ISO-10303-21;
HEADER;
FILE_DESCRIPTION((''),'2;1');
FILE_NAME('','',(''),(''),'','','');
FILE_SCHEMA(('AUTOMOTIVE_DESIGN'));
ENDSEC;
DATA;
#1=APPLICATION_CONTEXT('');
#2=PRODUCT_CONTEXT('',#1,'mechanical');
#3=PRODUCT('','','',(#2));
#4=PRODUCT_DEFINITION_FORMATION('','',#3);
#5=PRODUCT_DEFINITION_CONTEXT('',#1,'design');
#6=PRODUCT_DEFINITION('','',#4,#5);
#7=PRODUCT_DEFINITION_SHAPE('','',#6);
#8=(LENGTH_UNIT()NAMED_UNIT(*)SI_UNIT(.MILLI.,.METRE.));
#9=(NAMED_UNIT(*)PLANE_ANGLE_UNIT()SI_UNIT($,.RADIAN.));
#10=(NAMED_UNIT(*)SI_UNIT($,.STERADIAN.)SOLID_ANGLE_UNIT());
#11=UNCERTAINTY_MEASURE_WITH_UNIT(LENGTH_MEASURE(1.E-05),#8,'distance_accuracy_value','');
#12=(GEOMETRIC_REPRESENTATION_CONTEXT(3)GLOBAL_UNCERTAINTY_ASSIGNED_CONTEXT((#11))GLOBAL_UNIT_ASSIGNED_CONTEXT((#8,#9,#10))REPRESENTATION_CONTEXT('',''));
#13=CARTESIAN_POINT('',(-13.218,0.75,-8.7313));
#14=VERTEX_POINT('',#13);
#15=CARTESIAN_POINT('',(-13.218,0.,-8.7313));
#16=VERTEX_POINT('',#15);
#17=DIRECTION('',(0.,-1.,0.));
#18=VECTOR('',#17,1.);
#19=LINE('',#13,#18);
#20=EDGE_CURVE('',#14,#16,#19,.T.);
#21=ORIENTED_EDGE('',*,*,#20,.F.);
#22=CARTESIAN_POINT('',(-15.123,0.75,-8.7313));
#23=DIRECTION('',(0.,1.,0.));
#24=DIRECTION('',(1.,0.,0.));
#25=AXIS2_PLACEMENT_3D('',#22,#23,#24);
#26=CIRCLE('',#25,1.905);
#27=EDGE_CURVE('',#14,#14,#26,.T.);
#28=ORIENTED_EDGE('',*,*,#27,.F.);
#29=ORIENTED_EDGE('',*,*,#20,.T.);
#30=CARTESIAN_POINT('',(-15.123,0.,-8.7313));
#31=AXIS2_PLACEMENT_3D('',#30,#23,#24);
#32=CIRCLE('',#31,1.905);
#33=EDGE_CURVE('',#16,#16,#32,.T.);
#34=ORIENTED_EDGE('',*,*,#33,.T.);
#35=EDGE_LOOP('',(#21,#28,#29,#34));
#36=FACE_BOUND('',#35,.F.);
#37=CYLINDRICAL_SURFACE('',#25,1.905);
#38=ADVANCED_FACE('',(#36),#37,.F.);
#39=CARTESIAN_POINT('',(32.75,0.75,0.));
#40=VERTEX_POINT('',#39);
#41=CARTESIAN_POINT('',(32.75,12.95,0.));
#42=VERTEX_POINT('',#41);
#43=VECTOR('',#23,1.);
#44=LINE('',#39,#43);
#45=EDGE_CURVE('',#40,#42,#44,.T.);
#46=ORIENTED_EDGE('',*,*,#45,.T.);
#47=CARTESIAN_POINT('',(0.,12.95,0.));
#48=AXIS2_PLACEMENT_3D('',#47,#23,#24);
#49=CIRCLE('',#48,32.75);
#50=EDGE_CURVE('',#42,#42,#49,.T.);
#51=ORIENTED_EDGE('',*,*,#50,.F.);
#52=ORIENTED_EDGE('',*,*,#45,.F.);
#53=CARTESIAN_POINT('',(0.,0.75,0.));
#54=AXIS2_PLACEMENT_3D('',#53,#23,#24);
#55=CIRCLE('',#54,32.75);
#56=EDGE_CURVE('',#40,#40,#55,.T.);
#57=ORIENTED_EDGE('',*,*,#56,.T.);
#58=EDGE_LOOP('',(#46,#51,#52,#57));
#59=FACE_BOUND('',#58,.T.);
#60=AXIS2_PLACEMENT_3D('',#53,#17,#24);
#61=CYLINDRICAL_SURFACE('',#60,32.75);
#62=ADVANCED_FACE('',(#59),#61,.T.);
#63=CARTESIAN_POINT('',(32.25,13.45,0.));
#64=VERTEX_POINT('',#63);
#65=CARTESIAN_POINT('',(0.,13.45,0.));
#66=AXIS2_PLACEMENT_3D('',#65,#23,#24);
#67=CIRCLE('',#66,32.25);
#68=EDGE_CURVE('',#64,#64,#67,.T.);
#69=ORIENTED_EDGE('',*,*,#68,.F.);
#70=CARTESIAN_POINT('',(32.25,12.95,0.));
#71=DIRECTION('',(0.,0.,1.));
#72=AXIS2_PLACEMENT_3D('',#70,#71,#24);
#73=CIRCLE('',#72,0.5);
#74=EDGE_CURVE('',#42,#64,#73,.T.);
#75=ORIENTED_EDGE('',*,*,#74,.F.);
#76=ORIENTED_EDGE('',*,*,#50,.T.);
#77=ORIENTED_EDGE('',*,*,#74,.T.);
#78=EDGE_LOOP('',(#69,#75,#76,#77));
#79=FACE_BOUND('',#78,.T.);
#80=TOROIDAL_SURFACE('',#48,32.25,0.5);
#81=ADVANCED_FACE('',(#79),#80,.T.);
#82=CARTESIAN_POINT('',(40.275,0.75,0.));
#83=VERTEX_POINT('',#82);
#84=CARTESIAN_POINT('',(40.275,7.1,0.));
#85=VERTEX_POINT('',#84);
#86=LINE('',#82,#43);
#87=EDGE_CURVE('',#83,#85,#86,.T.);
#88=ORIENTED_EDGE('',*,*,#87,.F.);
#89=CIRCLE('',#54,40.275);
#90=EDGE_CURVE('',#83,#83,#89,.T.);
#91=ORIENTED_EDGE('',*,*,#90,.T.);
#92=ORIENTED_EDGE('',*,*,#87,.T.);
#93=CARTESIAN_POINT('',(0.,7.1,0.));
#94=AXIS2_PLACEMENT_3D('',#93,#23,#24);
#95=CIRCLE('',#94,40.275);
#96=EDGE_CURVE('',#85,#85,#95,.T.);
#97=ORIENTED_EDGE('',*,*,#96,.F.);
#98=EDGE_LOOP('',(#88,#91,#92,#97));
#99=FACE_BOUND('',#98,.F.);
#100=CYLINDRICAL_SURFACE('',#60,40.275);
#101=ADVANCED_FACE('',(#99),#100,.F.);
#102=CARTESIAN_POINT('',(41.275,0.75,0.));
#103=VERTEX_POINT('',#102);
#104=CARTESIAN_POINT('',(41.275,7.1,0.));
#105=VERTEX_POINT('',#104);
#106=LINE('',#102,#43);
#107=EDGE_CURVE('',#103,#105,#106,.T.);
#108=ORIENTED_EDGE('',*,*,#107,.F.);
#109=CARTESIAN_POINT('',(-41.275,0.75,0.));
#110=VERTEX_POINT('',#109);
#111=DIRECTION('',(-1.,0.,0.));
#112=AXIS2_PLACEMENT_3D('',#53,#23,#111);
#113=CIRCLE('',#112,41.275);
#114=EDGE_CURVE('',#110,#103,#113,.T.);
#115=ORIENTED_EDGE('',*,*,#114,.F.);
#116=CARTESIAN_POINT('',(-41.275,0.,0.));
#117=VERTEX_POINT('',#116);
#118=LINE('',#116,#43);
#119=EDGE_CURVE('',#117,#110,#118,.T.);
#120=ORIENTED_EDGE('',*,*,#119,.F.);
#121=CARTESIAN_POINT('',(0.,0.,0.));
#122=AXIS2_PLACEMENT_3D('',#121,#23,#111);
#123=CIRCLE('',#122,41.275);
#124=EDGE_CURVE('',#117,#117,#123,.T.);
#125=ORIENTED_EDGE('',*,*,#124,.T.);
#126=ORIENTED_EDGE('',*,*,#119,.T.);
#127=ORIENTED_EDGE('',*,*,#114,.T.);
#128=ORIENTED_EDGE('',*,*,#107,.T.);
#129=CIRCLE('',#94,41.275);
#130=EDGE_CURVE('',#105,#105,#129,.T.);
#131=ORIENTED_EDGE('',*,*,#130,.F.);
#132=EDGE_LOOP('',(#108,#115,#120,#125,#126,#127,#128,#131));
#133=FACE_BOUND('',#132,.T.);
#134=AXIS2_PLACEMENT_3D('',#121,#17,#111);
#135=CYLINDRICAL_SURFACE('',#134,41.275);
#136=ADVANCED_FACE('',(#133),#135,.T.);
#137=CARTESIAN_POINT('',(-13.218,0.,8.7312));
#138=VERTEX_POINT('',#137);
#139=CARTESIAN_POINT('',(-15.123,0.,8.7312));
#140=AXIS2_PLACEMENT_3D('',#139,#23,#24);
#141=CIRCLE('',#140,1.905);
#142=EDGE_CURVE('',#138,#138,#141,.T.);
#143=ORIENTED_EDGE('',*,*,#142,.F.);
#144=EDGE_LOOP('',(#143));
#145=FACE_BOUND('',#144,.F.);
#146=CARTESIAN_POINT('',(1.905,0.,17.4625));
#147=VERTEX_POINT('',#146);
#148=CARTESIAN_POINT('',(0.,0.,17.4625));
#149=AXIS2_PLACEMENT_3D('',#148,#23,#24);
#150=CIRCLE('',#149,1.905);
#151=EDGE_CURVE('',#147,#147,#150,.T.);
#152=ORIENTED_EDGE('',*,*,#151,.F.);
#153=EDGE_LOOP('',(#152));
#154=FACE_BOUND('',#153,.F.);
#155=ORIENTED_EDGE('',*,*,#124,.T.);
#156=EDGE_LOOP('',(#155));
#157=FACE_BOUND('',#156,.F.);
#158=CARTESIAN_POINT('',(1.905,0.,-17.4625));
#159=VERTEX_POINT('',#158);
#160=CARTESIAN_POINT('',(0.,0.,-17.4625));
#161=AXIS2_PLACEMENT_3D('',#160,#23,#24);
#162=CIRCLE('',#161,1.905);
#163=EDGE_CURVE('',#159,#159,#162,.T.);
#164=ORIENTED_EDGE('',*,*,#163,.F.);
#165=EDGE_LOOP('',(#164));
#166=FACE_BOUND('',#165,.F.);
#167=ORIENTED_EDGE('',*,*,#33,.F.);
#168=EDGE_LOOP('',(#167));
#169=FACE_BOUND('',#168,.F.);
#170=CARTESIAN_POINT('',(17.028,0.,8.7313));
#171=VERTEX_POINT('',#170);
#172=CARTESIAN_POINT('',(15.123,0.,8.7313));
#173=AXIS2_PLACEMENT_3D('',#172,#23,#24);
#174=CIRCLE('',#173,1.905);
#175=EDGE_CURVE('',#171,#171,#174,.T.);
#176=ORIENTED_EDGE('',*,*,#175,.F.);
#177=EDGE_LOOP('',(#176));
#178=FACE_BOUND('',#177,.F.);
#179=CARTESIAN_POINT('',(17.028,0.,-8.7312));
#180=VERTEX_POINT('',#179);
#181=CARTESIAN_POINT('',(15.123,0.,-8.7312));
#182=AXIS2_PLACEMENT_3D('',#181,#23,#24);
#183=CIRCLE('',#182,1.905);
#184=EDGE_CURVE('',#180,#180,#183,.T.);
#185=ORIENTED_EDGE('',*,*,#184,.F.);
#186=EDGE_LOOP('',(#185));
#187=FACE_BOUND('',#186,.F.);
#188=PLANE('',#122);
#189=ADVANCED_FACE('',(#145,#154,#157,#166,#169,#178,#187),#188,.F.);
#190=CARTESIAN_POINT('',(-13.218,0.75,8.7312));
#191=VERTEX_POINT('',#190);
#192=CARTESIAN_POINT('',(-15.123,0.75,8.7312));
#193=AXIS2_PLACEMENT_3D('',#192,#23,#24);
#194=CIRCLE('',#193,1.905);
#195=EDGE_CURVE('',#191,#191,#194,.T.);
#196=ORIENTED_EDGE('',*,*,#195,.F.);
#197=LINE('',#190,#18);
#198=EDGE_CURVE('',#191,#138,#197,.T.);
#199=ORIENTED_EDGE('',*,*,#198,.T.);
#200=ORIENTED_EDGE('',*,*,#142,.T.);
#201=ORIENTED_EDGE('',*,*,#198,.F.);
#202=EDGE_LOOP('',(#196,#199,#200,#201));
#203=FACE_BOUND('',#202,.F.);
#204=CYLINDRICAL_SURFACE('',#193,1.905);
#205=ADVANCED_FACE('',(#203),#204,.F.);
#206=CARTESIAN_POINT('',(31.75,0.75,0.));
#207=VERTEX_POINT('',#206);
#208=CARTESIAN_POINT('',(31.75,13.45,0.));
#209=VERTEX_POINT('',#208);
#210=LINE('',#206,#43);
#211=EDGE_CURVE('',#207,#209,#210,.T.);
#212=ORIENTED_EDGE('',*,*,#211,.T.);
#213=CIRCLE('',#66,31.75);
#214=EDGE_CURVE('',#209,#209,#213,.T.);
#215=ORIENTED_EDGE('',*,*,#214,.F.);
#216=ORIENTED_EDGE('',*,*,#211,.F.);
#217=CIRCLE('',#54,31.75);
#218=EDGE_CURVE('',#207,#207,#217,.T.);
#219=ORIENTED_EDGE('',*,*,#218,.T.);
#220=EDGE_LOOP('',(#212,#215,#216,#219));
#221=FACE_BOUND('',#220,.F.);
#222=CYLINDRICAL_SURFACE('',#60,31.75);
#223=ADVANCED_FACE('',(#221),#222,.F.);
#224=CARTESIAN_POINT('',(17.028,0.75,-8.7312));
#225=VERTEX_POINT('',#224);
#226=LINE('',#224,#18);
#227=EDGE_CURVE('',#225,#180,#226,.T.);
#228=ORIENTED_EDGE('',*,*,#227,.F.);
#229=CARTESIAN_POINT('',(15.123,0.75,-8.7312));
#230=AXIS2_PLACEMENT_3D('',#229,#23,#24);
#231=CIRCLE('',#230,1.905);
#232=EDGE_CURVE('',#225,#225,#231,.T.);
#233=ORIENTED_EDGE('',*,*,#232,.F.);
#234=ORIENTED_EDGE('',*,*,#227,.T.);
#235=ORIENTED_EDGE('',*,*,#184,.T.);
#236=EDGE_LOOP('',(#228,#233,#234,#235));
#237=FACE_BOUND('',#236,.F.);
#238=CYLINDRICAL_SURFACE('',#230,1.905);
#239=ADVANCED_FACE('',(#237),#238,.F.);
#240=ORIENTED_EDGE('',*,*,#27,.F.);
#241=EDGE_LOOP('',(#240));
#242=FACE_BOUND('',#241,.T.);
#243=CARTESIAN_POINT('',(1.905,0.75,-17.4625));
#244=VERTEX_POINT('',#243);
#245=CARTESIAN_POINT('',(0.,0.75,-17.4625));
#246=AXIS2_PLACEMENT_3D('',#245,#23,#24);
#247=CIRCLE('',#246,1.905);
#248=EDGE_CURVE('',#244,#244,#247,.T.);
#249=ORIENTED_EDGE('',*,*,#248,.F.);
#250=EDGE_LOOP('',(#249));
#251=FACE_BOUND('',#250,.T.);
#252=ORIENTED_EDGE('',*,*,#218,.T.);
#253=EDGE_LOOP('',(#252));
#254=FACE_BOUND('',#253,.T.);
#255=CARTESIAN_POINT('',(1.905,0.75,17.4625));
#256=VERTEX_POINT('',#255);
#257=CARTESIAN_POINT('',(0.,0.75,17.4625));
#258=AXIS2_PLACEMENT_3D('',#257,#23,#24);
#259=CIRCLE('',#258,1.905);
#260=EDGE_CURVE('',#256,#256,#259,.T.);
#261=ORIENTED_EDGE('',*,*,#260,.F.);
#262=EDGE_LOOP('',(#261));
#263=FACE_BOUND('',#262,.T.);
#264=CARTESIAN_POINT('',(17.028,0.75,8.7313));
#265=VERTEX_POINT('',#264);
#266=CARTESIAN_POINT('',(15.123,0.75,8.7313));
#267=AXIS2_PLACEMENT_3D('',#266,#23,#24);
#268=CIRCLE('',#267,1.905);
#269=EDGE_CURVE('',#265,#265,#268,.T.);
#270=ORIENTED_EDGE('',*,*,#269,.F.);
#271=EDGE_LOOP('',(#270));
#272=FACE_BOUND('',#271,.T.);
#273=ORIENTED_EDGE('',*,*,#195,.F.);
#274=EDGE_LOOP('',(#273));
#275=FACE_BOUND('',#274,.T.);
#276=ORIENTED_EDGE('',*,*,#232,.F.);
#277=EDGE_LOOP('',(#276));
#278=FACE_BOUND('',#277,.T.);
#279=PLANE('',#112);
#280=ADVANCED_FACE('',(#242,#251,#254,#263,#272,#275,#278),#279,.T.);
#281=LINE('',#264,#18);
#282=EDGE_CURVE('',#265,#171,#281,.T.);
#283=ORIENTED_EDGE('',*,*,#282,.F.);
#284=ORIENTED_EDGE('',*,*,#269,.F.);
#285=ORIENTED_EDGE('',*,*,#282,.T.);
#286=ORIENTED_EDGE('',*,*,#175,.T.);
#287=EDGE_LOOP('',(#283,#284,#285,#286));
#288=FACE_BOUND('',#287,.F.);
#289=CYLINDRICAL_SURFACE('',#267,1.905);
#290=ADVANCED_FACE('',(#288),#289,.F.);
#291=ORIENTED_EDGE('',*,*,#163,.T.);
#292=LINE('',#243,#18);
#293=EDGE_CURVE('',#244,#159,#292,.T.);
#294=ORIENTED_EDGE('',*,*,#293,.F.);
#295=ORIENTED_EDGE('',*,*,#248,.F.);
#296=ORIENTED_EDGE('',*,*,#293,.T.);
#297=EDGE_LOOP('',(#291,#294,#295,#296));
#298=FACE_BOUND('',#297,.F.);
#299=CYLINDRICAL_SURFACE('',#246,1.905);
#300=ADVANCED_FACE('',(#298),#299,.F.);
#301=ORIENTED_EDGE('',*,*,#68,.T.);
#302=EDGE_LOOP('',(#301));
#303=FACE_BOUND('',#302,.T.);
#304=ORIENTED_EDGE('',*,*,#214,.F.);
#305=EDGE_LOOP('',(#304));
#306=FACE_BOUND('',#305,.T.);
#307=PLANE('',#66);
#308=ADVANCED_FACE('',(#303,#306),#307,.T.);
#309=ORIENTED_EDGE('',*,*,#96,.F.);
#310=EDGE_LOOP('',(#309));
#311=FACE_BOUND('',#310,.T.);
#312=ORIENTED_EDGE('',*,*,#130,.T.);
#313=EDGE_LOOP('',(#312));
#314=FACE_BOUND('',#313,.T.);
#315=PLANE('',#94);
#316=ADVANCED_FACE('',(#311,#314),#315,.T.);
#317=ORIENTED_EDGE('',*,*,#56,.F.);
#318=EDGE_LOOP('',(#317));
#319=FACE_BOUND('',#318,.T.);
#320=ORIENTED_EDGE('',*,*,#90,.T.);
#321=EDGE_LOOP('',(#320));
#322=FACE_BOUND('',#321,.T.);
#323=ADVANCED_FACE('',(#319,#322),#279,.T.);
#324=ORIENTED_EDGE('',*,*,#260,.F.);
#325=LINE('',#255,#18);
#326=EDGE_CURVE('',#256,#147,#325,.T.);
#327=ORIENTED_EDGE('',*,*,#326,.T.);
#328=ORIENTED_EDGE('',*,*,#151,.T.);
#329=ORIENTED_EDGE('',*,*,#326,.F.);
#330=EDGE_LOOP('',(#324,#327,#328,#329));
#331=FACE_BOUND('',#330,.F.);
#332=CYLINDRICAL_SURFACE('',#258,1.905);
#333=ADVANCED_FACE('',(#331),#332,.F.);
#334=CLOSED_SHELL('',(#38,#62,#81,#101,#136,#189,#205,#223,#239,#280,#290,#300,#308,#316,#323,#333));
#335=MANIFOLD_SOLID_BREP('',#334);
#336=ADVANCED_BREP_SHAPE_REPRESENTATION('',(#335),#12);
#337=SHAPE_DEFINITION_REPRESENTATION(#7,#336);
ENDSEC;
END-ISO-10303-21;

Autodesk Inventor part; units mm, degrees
ref_plane "YZ Plane" through (0, 0, 0) normal (1, 0, 0) x (0, 1, 0)
ref_plane "XZ Plane" through (0, 0, 0) normal (0, 1, 0) x (-1, 0, 0)
ref_plane "XY Plane" through (0, 0, 0) normal (0, 0, 1) x (1, 0, 0)
sketch "Sketch1" plane through (0, 0, 0) normal (0, 1, 0) x (-1, 0, 0)
  circle A0 centre (0, 0) radius 41.275
  dimension "d0" = 82.55
extrude "Extrusion1" add sketch "Sketch1" along normal blind 0.75
sketch "Sketch2" plane through (0, 0.75, 0) normal (0, 1, 0) x (1, 0, 0)
  circle A0 centre (0, 0) radius 31.75
  circle A1 centre (0, 0) radius 41.275 projected
  circle A2 centre (0, 0) radius 32.75
  circle A3 centre (0, 0) radius 40.275
  dimension "d3" = 63.5
  dimension "d4" = 1
  dimension "d5" = 1
extrude "Extrusion2" add sketch "Sketch2" along normal blind 12.7
fillet "Fillet1" radius 0.5 1 edges at (-32.75, 13.45, 0)
sketch "Sketch3" plane through (0, 0.75, 0) normal (0, 1, 0) x (1, 0, 0)
  circle A0 centre (0, 0) radius 17.4625 construction
  line L0 (0, 0) -> (0, -17.4625) construction
  circle A1 centre (0, -17.4625) radius 1.905
  circle A2 centre (15.123, -8.7313) radius 1.905
  circle A3 centre (15.123, 8.7312) radius 1.905
  circle A4 centre (0, 17.4625) radius 1.905
  circle A5 centre (-15.123, 8.7313) radius 1.905
  circle A6 centre (-15.123, -8.7312) radius 1.905
  dimension "d9" = 34.925
  dimension "d10" = 3.81
  dimension "d13" = 360
extrude "Extrusion3" cut sketch "Sketch3" against normal through all
thicken "Thicken1" operation cut thickness 6.35 both sides no extend neighbours no toward (0, -1, 0) faces at (-40.0621, 13.45, 7.3321)
properties part number "Mold - Wheel"
